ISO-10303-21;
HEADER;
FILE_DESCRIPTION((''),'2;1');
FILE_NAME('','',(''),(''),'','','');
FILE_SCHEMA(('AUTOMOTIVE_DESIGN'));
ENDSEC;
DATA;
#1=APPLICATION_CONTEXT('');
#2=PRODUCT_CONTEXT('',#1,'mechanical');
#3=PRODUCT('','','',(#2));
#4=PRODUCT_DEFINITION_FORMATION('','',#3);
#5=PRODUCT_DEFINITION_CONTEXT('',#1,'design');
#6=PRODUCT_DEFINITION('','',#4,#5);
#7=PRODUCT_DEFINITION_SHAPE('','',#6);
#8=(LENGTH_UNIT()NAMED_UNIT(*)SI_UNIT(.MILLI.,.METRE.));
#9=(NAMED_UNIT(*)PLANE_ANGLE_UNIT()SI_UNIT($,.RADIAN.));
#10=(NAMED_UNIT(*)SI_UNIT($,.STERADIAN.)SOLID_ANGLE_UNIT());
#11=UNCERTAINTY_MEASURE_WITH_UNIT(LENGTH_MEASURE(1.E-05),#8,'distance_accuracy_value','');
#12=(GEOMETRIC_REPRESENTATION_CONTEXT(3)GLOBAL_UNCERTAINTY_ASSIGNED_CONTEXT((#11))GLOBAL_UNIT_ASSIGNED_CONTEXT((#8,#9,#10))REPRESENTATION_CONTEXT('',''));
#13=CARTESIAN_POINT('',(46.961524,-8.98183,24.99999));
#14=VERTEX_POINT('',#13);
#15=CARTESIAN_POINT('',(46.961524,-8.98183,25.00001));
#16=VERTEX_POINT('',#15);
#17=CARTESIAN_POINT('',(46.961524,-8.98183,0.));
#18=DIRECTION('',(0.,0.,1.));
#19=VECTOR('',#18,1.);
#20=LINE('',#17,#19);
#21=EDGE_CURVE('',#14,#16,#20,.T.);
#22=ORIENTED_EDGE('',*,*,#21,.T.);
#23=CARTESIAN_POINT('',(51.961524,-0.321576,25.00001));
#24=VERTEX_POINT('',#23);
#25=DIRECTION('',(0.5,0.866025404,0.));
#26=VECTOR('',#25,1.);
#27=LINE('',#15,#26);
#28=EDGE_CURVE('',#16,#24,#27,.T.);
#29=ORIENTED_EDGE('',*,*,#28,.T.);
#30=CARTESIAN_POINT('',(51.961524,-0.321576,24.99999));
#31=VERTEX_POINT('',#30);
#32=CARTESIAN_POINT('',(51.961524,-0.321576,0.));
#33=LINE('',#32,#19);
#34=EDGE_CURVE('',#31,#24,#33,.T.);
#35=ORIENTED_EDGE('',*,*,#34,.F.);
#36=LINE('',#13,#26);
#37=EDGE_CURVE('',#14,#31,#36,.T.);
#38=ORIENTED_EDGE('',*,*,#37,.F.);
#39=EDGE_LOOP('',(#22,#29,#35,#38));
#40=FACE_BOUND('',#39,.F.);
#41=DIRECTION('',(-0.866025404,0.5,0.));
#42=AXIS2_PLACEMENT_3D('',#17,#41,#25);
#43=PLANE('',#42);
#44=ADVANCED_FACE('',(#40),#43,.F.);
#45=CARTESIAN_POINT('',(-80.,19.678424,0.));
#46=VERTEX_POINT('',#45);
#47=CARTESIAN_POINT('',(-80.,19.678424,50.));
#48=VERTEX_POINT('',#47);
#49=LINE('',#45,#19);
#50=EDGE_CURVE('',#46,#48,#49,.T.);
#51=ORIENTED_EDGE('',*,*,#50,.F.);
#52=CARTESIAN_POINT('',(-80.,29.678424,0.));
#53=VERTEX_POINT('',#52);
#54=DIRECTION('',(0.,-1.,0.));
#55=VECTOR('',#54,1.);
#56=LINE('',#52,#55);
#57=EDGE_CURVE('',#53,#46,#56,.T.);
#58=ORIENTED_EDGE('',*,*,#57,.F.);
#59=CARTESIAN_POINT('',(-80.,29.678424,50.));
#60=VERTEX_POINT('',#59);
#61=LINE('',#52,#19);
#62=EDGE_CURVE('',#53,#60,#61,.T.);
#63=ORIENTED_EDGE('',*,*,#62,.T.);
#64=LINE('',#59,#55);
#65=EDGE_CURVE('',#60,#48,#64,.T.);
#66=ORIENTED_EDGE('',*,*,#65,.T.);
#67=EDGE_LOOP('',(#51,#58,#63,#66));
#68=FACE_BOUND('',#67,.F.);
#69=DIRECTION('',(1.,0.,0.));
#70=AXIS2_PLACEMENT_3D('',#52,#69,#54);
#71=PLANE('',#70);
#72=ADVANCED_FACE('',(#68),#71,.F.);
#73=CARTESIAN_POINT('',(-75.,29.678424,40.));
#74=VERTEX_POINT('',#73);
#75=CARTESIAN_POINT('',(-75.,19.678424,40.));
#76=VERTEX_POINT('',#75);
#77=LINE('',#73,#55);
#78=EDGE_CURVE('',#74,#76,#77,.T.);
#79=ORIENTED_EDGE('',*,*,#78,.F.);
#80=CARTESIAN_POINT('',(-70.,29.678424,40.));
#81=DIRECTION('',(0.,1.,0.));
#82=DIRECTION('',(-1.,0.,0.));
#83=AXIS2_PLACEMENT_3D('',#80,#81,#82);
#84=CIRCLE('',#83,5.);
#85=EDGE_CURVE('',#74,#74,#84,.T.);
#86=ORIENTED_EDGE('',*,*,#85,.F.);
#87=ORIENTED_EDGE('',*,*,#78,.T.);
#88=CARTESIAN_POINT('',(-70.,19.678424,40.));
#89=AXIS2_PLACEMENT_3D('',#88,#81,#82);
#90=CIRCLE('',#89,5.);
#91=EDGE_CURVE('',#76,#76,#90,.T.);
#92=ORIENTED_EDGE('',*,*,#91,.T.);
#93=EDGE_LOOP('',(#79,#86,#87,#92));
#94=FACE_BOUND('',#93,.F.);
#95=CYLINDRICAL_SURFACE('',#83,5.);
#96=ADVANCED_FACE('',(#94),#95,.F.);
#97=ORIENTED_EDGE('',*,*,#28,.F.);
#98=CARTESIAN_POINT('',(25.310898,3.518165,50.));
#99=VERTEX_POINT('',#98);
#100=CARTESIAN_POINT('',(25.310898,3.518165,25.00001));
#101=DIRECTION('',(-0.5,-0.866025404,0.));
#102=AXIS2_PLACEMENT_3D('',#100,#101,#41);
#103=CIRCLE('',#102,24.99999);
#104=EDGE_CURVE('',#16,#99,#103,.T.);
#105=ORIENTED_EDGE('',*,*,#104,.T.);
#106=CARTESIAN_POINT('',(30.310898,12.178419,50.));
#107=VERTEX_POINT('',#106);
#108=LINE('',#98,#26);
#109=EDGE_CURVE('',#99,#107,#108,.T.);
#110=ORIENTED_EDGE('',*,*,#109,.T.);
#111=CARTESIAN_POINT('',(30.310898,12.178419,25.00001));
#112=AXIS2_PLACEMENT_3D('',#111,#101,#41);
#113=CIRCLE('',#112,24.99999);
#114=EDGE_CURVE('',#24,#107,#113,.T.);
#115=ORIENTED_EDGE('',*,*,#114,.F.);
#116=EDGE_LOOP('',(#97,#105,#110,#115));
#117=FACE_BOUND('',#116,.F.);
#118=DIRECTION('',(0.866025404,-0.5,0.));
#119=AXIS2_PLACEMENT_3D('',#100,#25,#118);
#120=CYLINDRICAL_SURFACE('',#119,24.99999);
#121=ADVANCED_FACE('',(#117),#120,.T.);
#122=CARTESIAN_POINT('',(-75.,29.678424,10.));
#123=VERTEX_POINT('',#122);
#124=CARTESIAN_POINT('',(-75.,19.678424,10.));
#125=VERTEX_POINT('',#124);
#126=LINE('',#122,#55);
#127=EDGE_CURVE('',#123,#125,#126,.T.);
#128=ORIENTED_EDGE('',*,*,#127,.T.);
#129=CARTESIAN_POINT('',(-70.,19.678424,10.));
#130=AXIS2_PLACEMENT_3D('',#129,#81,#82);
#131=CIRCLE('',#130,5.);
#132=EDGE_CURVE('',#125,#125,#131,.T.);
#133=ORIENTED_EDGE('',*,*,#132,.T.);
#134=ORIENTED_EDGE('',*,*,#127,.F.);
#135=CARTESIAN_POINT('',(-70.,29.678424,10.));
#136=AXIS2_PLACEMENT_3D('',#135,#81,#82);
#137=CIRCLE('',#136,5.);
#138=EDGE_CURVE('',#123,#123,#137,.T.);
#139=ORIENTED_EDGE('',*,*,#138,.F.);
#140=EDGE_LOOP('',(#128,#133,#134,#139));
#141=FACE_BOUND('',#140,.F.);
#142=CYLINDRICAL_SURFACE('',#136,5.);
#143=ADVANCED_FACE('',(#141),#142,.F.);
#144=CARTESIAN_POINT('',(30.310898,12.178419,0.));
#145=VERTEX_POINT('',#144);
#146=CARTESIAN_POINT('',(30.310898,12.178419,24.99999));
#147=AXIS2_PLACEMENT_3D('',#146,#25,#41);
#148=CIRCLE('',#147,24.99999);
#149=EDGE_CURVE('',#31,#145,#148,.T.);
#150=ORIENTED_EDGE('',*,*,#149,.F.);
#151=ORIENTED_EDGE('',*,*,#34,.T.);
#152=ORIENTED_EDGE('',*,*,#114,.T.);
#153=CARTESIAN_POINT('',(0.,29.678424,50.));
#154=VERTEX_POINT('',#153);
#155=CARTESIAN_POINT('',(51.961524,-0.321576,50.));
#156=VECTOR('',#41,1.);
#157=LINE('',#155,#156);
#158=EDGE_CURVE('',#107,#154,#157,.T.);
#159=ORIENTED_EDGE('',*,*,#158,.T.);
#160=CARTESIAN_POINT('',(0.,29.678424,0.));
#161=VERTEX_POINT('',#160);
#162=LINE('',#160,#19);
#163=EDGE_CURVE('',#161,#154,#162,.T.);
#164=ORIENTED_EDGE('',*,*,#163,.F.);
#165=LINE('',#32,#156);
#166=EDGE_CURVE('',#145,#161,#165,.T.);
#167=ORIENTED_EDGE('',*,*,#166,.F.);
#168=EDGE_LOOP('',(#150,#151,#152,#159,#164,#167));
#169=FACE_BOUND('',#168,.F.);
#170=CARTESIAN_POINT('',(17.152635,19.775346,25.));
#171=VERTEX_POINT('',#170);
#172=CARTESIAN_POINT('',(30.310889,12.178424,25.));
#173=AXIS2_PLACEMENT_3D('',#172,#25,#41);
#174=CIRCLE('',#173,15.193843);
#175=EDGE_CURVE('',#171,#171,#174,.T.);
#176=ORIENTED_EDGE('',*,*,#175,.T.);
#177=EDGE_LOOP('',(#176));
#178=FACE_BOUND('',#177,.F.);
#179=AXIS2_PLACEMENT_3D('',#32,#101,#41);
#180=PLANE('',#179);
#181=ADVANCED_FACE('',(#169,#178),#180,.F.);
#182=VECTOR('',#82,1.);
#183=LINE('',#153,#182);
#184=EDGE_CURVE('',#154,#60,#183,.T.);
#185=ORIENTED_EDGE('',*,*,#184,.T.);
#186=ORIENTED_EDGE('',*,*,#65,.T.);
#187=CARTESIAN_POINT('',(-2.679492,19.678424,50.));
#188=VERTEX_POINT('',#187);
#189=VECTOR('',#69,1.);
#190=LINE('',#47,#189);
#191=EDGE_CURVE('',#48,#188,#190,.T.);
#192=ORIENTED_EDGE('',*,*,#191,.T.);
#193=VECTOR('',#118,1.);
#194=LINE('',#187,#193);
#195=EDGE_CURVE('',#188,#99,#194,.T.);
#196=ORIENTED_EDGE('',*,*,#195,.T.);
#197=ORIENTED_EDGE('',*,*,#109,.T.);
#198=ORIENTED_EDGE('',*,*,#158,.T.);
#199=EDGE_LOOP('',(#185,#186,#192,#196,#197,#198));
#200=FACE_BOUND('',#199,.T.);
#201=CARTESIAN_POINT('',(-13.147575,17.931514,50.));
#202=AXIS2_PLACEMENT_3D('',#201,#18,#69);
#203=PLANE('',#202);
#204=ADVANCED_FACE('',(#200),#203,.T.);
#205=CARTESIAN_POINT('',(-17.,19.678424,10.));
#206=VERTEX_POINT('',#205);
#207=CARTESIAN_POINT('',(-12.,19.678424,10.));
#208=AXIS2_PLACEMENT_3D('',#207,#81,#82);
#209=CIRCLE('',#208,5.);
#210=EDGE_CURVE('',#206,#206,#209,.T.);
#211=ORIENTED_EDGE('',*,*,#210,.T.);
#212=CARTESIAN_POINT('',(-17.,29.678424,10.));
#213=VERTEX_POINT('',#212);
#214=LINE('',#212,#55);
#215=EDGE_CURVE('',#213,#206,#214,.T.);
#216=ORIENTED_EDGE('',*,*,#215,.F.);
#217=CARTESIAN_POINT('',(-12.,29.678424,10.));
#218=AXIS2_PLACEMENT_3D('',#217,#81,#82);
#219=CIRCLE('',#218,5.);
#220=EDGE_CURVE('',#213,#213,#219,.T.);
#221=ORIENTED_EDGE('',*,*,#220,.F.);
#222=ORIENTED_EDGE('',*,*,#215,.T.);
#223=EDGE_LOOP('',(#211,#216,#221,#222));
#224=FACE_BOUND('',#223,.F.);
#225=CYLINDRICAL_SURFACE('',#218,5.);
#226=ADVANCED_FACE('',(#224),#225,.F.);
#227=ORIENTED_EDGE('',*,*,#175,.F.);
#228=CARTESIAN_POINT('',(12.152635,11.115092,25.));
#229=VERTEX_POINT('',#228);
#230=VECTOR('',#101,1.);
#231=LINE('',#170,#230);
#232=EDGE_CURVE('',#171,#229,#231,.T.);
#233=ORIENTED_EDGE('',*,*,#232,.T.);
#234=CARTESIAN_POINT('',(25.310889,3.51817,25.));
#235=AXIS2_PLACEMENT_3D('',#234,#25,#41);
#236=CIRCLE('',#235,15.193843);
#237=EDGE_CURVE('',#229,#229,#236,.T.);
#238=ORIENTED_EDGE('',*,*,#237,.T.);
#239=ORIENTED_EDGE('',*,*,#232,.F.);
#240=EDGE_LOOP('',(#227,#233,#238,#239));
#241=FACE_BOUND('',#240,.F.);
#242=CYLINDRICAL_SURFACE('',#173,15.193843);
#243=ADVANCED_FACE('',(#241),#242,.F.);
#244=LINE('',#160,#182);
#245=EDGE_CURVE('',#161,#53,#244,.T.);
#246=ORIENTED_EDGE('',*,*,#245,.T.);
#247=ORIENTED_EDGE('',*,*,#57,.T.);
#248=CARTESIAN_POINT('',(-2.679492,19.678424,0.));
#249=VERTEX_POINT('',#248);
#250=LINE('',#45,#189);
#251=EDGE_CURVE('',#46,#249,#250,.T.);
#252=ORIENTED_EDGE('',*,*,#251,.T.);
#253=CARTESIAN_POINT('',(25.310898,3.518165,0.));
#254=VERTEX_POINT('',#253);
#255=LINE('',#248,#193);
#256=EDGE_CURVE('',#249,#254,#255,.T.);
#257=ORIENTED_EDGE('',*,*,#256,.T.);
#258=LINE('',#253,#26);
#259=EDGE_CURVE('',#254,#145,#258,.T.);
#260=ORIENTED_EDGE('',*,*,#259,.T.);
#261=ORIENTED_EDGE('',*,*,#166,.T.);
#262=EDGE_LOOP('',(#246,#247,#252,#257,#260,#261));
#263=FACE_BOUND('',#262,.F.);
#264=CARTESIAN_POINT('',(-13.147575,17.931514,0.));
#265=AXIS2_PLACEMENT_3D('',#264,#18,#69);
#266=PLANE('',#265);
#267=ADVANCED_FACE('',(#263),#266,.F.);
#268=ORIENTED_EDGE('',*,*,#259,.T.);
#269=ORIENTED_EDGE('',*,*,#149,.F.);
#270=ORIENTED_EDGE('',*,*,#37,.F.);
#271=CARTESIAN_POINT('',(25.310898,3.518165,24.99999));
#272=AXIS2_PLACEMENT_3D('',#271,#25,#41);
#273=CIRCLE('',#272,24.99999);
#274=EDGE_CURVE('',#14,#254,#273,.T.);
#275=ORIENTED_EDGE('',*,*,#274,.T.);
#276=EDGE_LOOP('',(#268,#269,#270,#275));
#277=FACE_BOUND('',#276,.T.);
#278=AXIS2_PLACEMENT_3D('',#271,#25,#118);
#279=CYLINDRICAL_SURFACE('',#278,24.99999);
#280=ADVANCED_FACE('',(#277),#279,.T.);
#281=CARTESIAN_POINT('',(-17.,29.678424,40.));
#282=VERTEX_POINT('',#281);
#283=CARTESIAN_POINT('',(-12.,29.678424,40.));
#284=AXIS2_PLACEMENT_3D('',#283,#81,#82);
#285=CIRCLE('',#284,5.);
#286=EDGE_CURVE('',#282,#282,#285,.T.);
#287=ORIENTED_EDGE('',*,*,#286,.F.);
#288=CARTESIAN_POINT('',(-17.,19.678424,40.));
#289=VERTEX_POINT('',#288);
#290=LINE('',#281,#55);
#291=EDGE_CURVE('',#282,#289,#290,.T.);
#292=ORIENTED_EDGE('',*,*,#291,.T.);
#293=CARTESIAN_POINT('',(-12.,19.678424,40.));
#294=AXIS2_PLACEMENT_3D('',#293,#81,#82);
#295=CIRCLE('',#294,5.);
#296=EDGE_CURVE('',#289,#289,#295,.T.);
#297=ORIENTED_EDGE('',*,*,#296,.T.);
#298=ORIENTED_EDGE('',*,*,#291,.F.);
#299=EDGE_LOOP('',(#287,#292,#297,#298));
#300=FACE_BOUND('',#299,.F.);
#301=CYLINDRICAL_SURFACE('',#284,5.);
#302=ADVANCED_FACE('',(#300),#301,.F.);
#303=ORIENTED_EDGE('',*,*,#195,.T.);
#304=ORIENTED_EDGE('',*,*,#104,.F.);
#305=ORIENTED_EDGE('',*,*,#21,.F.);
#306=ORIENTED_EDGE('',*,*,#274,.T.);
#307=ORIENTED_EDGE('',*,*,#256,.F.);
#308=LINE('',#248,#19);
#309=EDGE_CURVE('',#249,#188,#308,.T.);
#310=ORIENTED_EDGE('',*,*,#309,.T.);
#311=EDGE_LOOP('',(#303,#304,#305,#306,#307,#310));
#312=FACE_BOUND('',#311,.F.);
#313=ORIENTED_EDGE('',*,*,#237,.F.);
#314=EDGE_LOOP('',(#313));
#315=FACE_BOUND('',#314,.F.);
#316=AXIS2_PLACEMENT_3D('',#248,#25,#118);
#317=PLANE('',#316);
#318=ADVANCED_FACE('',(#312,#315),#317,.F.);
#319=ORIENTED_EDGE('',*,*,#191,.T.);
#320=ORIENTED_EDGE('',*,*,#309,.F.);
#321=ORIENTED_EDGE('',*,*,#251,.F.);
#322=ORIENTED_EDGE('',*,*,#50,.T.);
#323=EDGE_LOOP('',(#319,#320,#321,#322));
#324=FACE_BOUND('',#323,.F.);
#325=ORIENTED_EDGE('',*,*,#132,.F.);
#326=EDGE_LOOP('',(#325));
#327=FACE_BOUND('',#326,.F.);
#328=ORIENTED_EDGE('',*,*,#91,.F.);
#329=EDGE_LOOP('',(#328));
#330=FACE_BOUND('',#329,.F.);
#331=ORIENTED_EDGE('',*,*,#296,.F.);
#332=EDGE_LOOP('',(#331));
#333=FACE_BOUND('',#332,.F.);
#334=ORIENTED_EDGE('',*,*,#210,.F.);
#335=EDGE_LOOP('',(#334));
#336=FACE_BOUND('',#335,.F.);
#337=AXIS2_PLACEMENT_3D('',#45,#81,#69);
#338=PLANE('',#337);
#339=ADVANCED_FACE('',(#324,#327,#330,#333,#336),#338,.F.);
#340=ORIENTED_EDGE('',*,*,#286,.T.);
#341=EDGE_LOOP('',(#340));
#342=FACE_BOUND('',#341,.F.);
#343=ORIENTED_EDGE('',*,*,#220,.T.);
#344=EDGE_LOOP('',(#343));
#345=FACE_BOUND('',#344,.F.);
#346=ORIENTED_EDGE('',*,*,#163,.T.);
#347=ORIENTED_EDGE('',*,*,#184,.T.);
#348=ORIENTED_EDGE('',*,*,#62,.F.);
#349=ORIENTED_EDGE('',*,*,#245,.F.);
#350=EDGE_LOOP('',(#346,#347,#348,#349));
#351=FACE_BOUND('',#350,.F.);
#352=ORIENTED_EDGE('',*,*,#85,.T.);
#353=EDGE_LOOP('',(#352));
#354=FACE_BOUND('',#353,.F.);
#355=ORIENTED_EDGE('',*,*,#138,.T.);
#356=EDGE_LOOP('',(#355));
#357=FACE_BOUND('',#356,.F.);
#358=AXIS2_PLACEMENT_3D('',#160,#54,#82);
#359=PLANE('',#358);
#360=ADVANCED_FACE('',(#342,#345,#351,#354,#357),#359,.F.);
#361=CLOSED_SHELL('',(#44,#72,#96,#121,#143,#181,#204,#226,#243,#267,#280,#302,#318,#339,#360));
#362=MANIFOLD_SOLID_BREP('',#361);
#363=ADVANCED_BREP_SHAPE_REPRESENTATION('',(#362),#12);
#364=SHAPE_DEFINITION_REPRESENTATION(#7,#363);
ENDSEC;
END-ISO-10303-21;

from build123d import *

# Parameters (mm, degrees)
F1_DEPTH = 50
F2_R     = 24.99999
F3_R     = 15.1938434026
F4_DEPTH = 73.4817621135
F5_R     = 5
F6_DEPTH = 38.6612540378


# Not quite as in the source:
# - a fillet or chamfer is up to 0.001 mm smaller than in the source, because OpenCascade refuses the exact size


with BuildPart() as f1:
    # F0 (on Top) → F1 (new body)
    with BuildSketch(Plane.XY):
        Polygon((0, 29.6784242139), (-80, 29.6784242139), (-80, 19.6784242139), (-2.6794919243, 19.6784242139), (46.9615242271, -8.9818298239), (51.9615242271, -0.3215757861), align=None)
    extrude(amount=F1_DEPTH)

    # F2 (radius 25 in the source; OpenCascade refuses exactly that, so slightly less here)
    f2_edges = [f1.edges().sort_by_distance(p)[0] for p in [
        (49.461524, -4.651703, 50),
        (49.461524, -4.651703, 0),
    ]]
    fillet(f2_edges, radius=F2_R)

    # F3 (on face) → F4 (cut, through all)
    with BuildSketch(Plane(origin=(12.8511346568, 22.2588181604, 0), x_dir=(-0.8660254038, 0.5, 0), z_dir=(0.5, 0.8660254038, 0))):
        with Locations((-20.160787893, 25)):
            Circle(F3_R)
    extrude(amount=-F4_DEPTH, mode=Mode.SUBTRACT)

    # F5 (on face) → F6 (cut, through all)
    with BuildSketch(Plane(origin=(0, 29.6784242139, 0), x_dir=(-1, 0, 0), z_dir=(0, 1, 0))):
        with Locations((12, 40)):
            Circle(F5_R)
        with Locations((70, 40)):
            Circle(F5_R)
        with Locations((12, 10)):
            Circle(F5_R)
        with Locations((70, 10)):
            Circle(F5_R)
    extrude(amount=-F6_DEPTH, mode=Mode.SUBTRACT)


solid = f1.part
